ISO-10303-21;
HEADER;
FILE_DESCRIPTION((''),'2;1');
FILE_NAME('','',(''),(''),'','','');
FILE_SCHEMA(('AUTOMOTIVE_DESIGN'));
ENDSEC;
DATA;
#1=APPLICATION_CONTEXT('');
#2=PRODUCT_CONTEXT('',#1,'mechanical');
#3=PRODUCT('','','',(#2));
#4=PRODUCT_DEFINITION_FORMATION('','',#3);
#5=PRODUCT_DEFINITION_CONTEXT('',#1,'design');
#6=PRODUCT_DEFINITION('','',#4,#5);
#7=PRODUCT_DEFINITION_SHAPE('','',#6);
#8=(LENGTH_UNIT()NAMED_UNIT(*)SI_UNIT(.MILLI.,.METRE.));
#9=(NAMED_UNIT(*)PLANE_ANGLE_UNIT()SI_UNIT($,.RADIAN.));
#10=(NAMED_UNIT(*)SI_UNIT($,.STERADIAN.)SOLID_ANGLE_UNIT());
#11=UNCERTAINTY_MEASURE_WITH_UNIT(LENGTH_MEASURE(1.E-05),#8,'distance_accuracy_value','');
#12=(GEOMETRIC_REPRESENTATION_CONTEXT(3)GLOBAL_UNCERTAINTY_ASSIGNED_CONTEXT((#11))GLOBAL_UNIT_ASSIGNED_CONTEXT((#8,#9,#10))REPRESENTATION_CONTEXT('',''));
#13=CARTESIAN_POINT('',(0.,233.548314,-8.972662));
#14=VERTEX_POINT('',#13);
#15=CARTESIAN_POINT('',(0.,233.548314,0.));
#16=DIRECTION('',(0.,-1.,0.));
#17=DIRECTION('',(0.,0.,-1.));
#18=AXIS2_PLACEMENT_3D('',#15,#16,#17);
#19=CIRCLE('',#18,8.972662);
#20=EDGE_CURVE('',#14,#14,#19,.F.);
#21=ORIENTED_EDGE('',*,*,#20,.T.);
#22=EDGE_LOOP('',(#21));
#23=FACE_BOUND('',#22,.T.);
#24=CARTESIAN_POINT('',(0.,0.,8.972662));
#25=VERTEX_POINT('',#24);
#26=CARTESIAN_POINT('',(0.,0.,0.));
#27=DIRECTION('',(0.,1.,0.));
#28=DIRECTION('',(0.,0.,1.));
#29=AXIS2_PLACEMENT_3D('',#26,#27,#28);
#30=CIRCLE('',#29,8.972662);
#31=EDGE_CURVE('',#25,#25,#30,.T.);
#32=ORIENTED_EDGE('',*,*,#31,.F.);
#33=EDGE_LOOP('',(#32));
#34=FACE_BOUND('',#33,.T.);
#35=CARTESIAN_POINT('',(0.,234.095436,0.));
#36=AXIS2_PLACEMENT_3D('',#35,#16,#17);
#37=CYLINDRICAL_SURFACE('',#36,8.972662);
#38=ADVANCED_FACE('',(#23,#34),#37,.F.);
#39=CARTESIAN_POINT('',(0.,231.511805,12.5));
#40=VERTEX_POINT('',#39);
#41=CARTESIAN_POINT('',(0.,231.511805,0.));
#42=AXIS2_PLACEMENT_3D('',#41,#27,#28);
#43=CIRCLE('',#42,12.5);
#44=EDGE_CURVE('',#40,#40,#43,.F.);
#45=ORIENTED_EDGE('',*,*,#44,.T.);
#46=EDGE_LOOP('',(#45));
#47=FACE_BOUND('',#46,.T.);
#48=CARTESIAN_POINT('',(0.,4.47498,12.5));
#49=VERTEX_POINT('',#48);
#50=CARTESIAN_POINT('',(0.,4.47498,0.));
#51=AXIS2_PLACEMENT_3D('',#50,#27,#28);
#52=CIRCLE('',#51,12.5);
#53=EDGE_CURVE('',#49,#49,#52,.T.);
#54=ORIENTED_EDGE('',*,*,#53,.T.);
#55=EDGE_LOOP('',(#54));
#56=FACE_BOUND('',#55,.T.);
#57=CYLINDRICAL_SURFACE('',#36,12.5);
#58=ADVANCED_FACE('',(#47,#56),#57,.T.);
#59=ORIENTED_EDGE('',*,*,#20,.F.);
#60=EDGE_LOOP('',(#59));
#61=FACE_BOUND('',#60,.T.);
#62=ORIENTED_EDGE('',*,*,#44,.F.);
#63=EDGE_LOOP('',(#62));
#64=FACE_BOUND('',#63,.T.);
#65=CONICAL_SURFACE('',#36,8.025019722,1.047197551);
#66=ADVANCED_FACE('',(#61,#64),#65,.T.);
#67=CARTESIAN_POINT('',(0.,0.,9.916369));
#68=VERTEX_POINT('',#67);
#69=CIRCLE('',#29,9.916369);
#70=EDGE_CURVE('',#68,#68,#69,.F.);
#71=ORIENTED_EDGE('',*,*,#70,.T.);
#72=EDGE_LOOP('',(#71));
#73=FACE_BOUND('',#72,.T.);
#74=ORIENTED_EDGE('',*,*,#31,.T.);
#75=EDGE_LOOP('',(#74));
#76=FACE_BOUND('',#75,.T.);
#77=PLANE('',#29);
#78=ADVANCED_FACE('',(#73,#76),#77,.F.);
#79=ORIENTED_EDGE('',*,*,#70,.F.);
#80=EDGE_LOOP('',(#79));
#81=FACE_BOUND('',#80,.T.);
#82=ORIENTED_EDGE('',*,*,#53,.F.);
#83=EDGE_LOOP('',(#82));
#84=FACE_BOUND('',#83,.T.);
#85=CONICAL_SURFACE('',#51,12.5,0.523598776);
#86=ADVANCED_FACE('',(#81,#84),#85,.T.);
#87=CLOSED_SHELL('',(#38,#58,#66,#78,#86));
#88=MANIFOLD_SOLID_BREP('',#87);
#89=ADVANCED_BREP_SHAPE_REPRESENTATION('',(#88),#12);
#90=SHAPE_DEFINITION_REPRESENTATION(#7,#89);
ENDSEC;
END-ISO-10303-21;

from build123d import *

# Parameters (mm, degrees)
SKETCH1_R           = 12.5
BOSS_EXTRUDE1_DEPTH = 234.095436
SKETCH2_R           = 8.972662212
CUT_EXTRUDE1_DEPTH  = 235.761949975
CHAMFER1_SIZE       = 2.583631
CHAMFER1_SIZE_2     = 4.47498


with BuildPart() as part:
    # Sketch1 → Boss-Extrude1 (new body)
    with BuildSketch(Plane(origin=(0, 0, 0), x_dir=(1, 0, 0), z_dir=(0, 1, 0))):
        with Locations(Location((0, 0, 0), (0, 0, 270))):
            Circle(SKETCH1_R)
    extrude(amount=BOSS_EXTRUDE1_DEPTH)

    # Sketch2 → Cut-Extrude1 (cut, through all)
    with BuildSketch(Plane(origin=(0, 0, 0), x_dir=(1, 0, 0), z_dir=(0, 1, 0))):
        with Locations(Location((0, 0, 0), (0, 0, 270))):
            Circle(SKETCH2_R)
    extrude(amount=CUT_EXTRUDE1_DEPTH, mode=Mode.SUBTRACT)

    # Chamfer1
    # the kernel refuses this chamfer: 4.47498, 2.583631 mm, written as the material it takes off along each edge
    with BuildSketch(Plane(origin=(0, 234.095436, 0), x_dir=(0, 0, 1), z_dir=(-1, 0, 0))) as chamfer1_piece_1:
        Polygon((12.5, -CHAMFER1_SIZE), (12.5 - CHAMFER1_SIZE_2, 0), (12.5, 0), align=None)
    revolve(axis=Axis((0, 234.095436, 0), (0, 1, 0)), mode=Mode.SUBTRACT)
    with BuildSketch(Plane(origin=(0, 0, 0), x_dir=(0, 0, 1), z_dir=(-1, 0, 0))) as chamfer1_piece_2:
        Polygon((12.5, CHAMFER1_SIZE_2), (12.5 - CHAMFER1_SIZE, 0), (12.5, 0), align=None)
    revolve(axis=Axis((0, 0, 0), (0, 1, 0)), mode=Mode.SUBTRACT)


solid = part.part
